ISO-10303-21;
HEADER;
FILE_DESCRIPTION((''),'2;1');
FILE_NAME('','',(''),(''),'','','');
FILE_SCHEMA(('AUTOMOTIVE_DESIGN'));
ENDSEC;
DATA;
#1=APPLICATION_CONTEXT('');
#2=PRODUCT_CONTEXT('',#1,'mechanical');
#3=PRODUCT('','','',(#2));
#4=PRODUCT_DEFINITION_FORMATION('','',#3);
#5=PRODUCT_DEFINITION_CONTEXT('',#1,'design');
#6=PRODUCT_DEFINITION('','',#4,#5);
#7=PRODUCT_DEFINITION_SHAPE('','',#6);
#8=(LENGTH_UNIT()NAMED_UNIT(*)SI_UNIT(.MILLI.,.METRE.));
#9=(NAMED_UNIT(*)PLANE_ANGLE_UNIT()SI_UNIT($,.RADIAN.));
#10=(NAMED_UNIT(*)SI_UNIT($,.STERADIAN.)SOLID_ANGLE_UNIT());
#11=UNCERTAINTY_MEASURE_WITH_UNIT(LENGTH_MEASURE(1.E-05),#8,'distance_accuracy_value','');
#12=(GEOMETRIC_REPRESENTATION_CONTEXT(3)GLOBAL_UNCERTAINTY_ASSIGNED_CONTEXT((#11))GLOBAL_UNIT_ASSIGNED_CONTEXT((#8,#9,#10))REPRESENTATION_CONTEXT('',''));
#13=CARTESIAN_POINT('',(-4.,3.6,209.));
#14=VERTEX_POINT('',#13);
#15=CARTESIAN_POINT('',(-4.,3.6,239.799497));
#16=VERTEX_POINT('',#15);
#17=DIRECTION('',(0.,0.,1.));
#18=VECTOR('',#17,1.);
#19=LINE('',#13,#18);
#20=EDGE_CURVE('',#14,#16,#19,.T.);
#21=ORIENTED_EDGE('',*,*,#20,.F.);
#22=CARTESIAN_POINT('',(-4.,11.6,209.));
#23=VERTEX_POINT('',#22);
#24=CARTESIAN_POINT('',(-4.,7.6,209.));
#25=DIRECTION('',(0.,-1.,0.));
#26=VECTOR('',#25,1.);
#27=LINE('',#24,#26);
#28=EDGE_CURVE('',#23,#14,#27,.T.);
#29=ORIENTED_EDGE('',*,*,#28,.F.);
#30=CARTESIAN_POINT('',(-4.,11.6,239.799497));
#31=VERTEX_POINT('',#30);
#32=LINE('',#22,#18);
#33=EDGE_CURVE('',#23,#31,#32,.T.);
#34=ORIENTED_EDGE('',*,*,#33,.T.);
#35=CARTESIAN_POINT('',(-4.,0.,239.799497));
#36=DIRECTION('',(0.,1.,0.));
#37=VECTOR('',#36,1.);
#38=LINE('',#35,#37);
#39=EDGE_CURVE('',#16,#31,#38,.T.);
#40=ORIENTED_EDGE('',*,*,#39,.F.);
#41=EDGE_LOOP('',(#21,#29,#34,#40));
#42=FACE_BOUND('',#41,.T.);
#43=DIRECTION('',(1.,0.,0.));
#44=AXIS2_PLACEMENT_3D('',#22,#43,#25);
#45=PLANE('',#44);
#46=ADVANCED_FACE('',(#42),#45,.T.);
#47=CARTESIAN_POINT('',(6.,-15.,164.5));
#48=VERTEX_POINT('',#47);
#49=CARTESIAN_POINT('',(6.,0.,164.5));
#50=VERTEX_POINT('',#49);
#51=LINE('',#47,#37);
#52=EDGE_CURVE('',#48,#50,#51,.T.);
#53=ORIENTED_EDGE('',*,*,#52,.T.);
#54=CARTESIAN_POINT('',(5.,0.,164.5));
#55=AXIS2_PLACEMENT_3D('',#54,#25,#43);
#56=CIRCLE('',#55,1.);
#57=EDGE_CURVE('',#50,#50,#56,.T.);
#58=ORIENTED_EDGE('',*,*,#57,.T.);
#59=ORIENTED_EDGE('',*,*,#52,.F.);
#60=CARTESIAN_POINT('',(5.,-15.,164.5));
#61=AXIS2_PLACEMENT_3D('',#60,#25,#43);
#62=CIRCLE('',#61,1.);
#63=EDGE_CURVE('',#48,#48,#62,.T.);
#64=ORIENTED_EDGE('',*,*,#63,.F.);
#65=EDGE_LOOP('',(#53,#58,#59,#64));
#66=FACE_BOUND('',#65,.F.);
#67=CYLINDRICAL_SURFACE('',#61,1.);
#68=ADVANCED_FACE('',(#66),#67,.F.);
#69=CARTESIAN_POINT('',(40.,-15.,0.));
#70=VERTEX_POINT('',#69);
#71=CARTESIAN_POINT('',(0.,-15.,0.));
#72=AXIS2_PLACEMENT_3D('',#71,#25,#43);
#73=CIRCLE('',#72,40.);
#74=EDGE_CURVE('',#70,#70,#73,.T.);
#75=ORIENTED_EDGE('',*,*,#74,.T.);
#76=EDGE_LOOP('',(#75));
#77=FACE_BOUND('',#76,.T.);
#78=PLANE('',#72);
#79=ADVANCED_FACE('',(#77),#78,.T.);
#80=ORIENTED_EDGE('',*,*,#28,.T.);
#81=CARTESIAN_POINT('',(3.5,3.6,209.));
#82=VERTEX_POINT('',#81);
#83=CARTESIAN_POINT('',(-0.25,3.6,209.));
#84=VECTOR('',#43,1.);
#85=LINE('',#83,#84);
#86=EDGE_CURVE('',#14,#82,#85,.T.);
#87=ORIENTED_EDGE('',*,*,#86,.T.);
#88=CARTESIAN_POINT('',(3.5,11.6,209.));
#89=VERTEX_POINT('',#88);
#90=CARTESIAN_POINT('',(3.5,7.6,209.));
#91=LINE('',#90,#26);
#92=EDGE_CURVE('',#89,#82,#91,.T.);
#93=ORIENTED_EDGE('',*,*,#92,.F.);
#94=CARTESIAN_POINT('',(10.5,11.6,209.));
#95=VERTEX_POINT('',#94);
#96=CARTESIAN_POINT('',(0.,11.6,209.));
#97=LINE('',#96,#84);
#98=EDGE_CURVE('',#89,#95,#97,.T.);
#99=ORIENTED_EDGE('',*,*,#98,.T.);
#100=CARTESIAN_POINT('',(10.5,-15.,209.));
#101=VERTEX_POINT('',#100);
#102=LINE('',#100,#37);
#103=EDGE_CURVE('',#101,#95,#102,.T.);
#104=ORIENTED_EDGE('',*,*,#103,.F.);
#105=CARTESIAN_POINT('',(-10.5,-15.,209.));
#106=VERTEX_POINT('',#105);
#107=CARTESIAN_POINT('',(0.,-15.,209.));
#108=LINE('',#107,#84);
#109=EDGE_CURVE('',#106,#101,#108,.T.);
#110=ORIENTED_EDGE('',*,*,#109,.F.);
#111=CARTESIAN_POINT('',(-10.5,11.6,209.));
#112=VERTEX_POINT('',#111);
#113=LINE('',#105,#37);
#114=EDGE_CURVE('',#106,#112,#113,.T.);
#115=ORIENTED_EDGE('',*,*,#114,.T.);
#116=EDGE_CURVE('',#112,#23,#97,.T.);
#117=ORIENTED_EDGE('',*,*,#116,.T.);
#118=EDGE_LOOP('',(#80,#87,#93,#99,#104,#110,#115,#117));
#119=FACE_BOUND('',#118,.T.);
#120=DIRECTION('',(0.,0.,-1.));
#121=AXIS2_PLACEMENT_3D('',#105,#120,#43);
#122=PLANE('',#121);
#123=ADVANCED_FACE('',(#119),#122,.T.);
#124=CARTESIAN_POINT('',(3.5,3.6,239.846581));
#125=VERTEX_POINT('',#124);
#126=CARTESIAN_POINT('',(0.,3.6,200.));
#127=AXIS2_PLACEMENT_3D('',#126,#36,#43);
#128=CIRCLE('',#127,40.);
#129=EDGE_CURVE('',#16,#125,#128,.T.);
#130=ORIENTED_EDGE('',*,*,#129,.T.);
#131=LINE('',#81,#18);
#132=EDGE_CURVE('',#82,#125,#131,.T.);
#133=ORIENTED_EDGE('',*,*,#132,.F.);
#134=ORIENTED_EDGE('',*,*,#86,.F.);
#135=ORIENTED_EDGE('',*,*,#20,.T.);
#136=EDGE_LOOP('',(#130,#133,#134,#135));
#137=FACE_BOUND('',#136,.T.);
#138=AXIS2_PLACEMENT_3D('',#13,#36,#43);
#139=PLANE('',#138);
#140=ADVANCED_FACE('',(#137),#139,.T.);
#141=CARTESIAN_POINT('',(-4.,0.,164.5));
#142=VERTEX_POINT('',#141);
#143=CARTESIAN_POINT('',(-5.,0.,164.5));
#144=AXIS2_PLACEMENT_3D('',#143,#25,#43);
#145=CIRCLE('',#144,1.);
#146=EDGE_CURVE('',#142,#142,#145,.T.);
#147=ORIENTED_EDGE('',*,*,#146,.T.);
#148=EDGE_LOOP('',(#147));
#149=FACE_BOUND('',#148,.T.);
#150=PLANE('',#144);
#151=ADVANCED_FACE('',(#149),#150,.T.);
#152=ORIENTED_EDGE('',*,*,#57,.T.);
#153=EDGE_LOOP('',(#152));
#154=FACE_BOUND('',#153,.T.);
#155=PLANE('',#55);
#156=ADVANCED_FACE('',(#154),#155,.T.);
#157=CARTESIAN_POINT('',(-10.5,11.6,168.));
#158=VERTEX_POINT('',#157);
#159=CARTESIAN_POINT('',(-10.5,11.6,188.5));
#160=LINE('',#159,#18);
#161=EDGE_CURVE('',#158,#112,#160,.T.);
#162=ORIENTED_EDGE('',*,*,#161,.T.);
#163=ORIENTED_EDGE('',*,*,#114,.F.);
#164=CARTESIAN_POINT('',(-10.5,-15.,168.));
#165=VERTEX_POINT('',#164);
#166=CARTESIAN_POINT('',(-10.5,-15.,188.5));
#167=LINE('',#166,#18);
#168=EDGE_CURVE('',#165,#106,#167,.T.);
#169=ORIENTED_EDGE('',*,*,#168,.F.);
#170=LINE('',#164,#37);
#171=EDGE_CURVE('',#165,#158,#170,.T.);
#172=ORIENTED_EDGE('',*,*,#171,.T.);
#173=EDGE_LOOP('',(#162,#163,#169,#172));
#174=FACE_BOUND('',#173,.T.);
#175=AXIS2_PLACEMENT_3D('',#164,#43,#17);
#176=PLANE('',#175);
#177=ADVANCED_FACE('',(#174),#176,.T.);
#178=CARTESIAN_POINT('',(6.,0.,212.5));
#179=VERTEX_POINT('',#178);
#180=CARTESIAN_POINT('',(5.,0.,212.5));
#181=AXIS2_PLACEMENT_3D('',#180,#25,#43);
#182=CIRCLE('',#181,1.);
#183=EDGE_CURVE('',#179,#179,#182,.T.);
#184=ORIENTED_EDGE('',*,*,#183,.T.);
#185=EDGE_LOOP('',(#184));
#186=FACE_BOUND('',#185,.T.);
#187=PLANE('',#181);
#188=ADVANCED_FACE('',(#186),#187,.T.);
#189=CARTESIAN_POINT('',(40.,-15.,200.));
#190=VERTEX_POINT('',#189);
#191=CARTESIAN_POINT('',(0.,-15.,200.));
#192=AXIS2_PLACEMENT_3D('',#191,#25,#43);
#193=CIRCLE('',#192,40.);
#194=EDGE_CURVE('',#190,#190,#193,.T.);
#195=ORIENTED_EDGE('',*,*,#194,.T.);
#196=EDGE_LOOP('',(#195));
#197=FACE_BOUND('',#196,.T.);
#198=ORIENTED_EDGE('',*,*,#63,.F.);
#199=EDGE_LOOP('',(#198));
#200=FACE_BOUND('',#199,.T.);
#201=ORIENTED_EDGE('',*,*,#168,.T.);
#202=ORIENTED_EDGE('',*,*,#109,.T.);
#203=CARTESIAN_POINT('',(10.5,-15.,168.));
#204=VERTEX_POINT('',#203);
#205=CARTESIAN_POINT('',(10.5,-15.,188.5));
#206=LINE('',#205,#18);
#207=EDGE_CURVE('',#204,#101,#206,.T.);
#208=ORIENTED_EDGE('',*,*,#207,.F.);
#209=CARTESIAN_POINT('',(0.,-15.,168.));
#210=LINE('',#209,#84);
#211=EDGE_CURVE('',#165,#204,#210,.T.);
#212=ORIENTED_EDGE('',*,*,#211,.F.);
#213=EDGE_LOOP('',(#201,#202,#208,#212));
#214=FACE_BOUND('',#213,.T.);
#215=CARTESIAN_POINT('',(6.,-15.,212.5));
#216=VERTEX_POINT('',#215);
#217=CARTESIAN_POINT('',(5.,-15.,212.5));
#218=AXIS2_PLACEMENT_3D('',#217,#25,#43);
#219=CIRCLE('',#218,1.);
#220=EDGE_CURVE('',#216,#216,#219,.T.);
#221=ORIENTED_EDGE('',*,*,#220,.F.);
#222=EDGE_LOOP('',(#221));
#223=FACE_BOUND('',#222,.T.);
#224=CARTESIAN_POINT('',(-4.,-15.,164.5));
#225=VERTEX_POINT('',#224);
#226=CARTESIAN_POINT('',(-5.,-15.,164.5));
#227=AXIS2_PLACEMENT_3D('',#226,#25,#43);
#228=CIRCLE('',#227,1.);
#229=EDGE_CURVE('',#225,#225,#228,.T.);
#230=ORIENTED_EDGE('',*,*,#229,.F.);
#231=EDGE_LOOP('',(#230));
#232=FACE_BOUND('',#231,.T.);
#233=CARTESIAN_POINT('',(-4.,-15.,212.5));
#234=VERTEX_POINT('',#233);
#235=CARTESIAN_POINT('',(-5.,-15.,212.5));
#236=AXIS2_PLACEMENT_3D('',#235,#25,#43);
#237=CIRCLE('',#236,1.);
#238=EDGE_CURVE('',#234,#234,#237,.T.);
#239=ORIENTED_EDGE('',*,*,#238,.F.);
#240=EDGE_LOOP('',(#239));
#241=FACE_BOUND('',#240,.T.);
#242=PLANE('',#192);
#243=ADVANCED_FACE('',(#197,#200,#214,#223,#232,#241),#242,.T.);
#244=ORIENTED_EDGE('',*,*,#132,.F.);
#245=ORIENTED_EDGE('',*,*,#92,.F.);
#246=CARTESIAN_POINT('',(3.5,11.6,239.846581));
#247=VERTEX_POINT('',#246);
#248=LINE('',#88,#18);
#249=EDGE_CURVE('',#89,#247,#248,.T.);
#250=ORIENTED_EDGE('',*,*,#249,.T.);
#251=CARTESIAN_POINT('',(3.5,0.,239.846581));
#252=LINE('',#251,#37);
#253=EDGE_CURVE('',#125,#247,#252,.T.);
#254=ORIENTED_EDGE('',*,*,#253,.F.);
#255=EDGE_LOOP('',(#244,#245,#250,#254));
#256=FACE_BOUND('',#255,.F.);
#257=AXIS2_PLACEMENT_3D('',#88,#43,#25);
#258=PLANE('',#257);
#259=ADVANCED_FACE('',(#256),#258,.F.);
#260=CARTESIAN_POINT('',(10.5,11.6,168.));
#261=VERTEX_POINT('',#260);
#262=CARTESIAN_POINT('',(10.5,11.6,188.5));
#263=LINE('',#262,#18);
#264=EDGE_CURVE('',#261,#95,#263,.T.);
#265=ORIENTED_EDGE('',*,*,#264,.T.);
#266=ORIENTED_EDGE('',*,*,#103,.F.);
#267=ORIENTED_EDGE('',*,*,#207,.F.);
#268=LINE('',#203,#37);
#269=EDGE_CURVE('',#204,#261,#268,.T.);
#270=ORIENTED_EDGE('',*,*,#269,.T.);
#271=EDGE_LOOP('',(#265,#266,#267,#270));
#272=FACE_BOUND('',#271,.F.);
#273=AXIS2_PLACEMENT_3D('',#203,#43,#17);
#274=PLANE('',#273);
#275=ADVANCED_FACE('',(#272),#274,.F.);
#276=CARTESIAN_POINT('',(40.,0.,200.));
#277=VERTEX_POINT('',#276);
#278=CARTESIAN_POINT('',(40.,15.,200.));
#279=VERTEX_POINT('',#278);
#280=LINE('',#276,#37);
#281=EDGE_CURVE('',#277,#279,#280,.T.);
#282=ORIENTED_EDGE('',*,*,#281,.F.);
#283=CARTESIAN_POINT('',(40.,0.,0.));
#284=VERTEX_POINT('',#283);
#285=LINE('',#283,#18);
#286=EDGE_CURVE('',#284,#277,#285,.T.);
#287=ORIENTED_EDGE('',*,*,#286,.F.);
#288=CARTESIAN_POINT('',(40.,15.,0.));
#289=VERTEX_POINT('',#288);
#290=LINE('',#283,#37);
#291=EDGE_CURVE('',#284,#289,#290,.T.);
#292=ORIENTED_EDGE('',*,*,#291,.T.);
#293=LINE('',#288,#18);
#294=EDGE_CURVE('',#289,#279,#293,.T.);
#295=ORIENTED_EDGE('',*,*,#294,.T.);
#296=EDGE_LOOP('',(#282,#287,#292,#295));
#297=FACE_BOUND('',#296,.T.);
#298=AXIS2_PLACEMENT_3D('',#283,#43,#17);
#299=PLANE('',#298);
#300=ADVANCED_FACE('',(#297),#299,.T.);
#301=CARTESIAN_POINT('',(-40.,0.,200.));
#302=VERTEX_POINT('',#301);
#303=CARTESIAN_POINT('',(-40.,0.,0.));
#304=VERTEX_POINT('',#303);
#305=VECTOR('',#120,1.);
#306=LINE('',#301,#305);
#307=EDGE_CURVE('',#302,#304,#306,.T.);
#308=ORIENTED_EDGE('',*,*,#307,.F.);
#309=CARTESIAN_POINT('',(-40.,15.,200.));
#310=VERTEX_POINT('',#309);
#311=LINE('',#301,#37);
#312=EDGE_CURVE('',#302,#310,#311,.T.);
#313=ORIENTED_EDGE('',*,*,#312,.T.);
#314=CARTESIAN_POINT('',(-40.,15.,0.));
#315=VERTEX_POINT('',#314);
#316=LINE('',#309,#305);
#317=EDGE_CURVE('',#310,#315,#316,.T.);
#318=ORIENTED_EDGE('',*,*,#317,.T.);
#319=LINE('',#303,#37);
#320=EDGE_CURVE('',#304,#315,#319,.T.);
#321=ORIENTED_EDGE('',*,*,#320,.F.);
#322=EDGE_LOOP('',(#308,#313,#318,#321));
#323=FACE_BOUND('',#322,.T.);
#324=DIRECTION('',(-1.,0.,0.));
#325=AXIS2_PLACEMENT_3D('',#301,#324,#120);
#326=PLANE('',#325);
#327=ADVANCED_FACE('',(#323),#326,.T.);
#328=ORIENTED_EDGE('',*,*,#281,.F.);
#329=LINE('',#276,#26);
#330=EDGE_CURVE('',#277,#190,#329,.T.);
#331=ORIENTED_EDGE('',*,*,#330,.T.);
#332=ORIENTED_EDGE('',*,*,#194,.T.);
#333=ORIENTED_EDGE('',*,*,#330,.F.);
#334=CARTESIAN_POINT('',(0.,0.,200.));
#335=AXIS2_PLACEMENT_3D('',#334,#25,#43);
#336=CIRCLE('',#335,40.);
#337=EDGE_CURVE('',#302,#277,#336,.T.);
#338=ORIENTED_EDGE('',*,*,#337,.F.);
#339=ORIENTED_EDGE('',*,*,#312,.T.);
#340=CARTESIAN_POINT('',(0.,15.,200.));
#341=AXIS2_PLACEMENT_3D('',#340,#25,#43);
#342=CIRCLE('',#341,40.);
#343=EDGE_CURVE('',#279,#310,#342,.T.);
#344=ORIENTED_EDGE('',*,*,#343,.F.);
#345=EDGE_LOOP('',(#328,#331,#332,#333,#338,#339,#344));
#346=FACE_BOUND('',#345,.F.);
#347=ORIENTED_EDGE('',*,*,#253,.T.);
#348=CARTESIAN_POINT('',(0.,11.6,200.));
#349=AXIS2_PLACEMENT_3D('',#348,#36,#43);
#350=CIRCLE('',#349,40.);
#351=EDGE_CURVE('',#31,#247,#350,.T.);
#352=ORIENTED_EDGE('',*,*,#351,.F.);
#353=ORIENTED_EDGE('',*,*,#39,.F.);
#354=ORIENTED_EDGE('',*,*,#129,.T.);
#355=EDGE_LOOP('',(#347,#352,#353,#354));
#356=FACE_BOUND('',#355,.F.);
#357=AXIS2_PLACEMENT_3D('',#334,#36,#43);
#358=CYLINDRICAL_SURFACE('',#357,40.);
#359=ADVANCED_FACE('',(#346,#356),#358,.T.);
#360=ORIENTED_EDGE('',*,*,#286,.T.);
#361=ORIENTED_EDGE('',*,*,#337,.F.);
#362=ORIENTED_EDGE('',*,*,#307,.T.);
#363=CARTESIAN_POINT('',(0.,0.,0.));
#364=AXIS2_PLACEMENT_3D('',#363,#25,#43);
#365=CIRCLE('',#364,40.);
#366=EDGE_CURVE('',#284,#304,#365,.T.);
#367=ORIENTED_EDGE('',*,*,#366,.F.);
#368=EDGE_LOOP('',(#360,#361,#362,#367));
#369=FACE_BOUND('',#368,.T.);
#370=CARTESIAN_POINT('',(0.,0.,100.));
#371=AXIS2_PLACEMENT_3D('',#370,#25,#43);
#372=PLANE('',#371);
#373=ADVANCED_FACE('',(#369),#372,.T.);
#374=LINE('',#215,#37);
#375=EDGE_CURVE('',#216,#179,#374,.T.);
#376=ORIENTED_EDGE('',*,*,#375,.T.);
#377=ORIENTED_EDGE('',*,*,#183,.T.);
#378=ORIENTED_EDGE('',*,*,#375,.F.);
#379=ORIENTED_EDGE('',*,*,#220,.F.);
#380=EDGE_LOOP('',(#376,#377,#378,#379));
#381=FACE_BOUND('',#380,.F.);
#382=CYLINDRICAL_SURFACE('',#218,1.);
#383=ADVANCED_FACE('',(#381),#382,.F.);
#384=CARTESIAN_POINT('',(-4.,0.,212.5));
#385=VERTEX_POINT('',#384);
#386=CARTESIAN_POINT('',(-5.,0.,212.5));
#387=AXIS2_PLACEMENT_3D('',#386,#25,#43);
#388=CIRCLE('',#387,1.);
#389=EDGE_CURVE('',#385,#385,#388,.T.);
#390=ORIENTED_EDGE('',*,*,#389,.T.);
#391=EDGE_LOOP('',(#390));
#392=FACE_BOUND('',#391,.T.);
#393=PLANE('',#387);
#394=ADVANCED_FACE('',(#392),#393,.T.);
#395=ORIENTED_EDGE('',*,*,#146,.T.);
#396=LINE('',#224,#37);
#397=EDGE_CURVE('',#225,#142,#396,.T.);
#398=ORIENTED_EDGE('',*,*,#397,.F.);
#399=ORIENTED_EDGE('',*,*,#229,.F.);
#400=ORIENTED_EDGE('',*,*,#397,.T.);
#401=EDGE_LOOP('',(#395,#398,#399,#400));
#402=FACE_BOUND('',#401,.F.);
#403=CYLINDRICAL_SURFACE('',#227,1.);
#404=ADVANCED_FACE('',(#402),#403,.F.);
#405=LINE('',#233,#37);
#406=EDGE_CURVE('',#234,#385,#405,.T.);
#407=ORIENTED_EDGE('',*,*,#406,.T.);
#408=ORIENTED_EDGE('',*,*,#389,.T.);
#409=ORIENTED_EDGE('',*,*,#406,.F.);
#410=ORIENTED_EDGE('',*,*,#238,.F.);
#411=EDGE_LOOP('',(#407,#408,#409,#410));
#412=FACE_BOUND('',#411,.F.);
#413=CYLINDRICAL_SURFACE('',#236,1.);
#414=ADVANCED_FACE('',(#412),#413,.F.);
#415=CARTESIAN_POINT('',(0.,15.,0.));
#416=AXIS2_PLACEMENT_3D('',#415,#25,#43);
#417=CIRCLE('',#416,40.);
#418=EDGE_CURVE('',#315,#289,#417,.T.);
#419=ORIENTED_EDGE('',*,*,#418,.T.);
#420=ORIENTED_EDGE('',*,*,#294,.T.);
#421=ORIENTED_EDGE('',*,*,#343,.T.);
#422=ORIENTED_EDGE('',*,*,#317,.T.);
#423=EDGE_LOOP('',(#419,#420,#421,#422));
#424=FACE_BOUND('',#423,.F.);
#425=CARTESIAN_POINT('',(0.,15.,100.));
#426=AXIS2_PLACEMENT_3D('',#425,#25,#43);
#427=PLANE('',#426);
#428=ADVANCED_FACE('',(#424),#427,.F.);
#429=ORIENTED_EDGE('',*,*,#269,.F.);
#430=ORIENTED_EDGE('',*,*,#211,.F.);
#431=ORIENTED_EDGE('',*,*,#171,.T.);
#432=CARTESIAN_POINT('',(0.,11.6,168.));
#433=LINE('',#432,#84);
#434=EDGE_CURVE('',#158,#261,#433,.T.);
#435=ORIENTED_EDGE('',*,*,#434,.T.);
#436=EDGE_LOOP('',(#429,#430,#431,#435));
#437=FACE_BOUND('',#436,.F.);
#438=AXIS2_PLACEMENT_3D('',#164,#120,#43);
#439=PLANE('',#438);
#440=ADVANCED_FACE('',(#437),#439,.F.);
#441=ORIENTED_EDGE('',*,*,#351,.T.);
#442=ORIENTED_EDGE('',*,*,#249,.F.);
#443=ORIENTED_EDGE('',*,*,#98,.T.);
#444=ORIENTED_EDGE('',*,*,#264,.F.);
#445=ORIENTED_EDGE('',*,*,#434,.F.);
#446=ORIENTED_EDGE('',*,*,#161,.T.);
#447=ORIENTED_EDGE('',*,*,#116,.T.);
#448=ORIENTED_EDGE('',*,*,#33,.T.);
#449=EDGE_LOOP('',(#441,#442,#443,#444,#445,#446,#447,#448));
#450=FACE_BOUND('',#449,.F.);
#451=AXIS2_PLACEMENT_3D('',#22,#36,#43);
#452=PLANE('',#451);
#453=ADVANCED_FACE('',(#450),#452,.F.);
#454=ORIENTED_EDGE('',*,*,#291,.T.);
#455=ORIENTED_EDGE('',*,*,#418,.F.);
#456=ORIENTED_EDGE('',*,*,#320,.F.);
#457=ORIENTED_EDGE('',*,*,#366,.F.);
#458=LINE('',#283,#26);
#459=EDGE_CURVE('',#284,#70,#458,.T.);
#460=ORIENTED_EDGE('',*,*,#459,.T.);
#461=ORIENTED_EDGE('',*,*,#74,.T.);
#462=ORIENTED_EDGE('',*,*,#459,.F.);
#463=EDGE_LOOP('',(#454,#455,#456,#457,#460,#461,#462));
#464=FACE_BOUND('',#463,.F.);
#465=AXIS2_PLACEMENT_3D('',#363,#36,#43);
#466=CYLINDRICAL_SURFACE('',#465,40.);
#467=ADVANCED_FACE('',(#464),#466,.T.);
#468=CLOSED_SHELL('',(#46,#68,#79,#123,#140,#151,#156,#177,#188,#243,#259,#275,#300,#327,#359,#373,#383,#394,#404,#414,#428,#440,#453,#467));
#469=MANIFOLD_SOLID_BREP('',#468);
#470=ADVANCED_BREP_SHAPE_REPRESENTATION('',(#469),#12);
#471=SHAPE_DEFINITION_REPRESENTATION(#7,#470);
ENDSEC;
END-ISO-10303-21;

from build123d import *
from build123d import SkipClean  # not in build123d's __all__

# Parameters (mm, degrees)
F1_DEPTH = 15
F2_DEPTH = 15
F3_DEPTH = 15
F4_W     = 21
F4_H     = 41
F5_DEPTH = 26.6
F6_R     = 1
F7_DEPTH = 15
F8_W     = 7.5
F8_H     = 8
F9_DEPTH = 31.001


# Not quite as in the source:
# - after a boolean that leaves OpenCascade's solid faulty, fix() repairs it


with BuildPart() as f1:
    # F0 (on Front) → F1 (new body)
    with BuildSketch(Plane.XZ):
        with BuildLine():
            ThreePointArc((-40, 0), (0, 40), (40, 0))
            Line((40, 0), (40, 200))
            ThreePointArc((40, 200), (0, 160), (-40, 200))
            Line((-40, 200), (-40, 0))
        make_face()
        with BuildLine():
            ThreePointArc((-40, 200), (0, 160), (40, 200))
            ThreePointArc((40, 200), (0, 240), (-40, 200))
        make_face()
        with BuildLine():
            ThreePointArc((-40, 0), (0, -40), (40, 0))
            ThreePointArc((40, 0), (0, 40), (-40, 0))
        make_face()
    extrude(amount=-F1_DEPTH)

    # F0 (on Front) → F2 (join)
    with BuildSketch(Plane.XZ):
        with BuildLine():
            ThreePointArc((-40, 200), (0, 160), (40, 200))
            ThreePointArc((40, 200), (0, 240), (-40, 200))
        make_face()
    with SkipClean():  # cleaning this boolean's faces spoils the solid; the shape is the same uncleaned
        extrude(amount=F2_DEPTH)

    # F0 (on Front) → F3 (join)
    with BuildSketch(Plane.XZ):
        with BuildLine():
            ThreePointArc((-40, 0), (0, -40), (40, 0))
            ThreePointArc((40, 0), (0, 40), (-40, 0))
        make_face()
    with SkipClean():  # cleaning this boolean's faces spoils the solid; the shape is the same uncleaned
        extrude(amount=F3_DEPTH)

    # F4 (on face) → F5 (cut)
    with BuildSketch(Plane.XZ.offset(15)):
        with Locations((0, 188.5)):
            Rectangle(F4_W, F4_H)
    extrude(amount=-F5_DEPTH, mode=Mode.SUBTRACT)

    add(f1.part.fix(), mode=Mode.REPLACE)

    # F6 (on face) → F7 (cut)
    with BuildSketch(Plane.XZ.offset(15)):
        with Locations((-5, 212.5)):
            Circle(F6_R)
        with Locations((5, 212.5)):
            Circle(F6_R)
        with Locations((5, 164.5)):
            Circle(F6_R)
        with Locations((-5, 164.5)):
            Circle(F6_R)
    extrude(amount=-F7_DEPTH, mode=Mode.SUBTRACT)

    # F8 (on face) → F9 (cut, through all)
    with BuildSketch(Plane(origin=(0, 0, 209), x_dir=(1, 0, 0), z_dir=(0, 0, -1))):
        with Locations((-0.25, -7.6)):
            Rectangle(F8_W, F8_H)
    extrude(amount=-F9_DEPTH, mode=Mode.SUBTRACT)


solid = f1.part
